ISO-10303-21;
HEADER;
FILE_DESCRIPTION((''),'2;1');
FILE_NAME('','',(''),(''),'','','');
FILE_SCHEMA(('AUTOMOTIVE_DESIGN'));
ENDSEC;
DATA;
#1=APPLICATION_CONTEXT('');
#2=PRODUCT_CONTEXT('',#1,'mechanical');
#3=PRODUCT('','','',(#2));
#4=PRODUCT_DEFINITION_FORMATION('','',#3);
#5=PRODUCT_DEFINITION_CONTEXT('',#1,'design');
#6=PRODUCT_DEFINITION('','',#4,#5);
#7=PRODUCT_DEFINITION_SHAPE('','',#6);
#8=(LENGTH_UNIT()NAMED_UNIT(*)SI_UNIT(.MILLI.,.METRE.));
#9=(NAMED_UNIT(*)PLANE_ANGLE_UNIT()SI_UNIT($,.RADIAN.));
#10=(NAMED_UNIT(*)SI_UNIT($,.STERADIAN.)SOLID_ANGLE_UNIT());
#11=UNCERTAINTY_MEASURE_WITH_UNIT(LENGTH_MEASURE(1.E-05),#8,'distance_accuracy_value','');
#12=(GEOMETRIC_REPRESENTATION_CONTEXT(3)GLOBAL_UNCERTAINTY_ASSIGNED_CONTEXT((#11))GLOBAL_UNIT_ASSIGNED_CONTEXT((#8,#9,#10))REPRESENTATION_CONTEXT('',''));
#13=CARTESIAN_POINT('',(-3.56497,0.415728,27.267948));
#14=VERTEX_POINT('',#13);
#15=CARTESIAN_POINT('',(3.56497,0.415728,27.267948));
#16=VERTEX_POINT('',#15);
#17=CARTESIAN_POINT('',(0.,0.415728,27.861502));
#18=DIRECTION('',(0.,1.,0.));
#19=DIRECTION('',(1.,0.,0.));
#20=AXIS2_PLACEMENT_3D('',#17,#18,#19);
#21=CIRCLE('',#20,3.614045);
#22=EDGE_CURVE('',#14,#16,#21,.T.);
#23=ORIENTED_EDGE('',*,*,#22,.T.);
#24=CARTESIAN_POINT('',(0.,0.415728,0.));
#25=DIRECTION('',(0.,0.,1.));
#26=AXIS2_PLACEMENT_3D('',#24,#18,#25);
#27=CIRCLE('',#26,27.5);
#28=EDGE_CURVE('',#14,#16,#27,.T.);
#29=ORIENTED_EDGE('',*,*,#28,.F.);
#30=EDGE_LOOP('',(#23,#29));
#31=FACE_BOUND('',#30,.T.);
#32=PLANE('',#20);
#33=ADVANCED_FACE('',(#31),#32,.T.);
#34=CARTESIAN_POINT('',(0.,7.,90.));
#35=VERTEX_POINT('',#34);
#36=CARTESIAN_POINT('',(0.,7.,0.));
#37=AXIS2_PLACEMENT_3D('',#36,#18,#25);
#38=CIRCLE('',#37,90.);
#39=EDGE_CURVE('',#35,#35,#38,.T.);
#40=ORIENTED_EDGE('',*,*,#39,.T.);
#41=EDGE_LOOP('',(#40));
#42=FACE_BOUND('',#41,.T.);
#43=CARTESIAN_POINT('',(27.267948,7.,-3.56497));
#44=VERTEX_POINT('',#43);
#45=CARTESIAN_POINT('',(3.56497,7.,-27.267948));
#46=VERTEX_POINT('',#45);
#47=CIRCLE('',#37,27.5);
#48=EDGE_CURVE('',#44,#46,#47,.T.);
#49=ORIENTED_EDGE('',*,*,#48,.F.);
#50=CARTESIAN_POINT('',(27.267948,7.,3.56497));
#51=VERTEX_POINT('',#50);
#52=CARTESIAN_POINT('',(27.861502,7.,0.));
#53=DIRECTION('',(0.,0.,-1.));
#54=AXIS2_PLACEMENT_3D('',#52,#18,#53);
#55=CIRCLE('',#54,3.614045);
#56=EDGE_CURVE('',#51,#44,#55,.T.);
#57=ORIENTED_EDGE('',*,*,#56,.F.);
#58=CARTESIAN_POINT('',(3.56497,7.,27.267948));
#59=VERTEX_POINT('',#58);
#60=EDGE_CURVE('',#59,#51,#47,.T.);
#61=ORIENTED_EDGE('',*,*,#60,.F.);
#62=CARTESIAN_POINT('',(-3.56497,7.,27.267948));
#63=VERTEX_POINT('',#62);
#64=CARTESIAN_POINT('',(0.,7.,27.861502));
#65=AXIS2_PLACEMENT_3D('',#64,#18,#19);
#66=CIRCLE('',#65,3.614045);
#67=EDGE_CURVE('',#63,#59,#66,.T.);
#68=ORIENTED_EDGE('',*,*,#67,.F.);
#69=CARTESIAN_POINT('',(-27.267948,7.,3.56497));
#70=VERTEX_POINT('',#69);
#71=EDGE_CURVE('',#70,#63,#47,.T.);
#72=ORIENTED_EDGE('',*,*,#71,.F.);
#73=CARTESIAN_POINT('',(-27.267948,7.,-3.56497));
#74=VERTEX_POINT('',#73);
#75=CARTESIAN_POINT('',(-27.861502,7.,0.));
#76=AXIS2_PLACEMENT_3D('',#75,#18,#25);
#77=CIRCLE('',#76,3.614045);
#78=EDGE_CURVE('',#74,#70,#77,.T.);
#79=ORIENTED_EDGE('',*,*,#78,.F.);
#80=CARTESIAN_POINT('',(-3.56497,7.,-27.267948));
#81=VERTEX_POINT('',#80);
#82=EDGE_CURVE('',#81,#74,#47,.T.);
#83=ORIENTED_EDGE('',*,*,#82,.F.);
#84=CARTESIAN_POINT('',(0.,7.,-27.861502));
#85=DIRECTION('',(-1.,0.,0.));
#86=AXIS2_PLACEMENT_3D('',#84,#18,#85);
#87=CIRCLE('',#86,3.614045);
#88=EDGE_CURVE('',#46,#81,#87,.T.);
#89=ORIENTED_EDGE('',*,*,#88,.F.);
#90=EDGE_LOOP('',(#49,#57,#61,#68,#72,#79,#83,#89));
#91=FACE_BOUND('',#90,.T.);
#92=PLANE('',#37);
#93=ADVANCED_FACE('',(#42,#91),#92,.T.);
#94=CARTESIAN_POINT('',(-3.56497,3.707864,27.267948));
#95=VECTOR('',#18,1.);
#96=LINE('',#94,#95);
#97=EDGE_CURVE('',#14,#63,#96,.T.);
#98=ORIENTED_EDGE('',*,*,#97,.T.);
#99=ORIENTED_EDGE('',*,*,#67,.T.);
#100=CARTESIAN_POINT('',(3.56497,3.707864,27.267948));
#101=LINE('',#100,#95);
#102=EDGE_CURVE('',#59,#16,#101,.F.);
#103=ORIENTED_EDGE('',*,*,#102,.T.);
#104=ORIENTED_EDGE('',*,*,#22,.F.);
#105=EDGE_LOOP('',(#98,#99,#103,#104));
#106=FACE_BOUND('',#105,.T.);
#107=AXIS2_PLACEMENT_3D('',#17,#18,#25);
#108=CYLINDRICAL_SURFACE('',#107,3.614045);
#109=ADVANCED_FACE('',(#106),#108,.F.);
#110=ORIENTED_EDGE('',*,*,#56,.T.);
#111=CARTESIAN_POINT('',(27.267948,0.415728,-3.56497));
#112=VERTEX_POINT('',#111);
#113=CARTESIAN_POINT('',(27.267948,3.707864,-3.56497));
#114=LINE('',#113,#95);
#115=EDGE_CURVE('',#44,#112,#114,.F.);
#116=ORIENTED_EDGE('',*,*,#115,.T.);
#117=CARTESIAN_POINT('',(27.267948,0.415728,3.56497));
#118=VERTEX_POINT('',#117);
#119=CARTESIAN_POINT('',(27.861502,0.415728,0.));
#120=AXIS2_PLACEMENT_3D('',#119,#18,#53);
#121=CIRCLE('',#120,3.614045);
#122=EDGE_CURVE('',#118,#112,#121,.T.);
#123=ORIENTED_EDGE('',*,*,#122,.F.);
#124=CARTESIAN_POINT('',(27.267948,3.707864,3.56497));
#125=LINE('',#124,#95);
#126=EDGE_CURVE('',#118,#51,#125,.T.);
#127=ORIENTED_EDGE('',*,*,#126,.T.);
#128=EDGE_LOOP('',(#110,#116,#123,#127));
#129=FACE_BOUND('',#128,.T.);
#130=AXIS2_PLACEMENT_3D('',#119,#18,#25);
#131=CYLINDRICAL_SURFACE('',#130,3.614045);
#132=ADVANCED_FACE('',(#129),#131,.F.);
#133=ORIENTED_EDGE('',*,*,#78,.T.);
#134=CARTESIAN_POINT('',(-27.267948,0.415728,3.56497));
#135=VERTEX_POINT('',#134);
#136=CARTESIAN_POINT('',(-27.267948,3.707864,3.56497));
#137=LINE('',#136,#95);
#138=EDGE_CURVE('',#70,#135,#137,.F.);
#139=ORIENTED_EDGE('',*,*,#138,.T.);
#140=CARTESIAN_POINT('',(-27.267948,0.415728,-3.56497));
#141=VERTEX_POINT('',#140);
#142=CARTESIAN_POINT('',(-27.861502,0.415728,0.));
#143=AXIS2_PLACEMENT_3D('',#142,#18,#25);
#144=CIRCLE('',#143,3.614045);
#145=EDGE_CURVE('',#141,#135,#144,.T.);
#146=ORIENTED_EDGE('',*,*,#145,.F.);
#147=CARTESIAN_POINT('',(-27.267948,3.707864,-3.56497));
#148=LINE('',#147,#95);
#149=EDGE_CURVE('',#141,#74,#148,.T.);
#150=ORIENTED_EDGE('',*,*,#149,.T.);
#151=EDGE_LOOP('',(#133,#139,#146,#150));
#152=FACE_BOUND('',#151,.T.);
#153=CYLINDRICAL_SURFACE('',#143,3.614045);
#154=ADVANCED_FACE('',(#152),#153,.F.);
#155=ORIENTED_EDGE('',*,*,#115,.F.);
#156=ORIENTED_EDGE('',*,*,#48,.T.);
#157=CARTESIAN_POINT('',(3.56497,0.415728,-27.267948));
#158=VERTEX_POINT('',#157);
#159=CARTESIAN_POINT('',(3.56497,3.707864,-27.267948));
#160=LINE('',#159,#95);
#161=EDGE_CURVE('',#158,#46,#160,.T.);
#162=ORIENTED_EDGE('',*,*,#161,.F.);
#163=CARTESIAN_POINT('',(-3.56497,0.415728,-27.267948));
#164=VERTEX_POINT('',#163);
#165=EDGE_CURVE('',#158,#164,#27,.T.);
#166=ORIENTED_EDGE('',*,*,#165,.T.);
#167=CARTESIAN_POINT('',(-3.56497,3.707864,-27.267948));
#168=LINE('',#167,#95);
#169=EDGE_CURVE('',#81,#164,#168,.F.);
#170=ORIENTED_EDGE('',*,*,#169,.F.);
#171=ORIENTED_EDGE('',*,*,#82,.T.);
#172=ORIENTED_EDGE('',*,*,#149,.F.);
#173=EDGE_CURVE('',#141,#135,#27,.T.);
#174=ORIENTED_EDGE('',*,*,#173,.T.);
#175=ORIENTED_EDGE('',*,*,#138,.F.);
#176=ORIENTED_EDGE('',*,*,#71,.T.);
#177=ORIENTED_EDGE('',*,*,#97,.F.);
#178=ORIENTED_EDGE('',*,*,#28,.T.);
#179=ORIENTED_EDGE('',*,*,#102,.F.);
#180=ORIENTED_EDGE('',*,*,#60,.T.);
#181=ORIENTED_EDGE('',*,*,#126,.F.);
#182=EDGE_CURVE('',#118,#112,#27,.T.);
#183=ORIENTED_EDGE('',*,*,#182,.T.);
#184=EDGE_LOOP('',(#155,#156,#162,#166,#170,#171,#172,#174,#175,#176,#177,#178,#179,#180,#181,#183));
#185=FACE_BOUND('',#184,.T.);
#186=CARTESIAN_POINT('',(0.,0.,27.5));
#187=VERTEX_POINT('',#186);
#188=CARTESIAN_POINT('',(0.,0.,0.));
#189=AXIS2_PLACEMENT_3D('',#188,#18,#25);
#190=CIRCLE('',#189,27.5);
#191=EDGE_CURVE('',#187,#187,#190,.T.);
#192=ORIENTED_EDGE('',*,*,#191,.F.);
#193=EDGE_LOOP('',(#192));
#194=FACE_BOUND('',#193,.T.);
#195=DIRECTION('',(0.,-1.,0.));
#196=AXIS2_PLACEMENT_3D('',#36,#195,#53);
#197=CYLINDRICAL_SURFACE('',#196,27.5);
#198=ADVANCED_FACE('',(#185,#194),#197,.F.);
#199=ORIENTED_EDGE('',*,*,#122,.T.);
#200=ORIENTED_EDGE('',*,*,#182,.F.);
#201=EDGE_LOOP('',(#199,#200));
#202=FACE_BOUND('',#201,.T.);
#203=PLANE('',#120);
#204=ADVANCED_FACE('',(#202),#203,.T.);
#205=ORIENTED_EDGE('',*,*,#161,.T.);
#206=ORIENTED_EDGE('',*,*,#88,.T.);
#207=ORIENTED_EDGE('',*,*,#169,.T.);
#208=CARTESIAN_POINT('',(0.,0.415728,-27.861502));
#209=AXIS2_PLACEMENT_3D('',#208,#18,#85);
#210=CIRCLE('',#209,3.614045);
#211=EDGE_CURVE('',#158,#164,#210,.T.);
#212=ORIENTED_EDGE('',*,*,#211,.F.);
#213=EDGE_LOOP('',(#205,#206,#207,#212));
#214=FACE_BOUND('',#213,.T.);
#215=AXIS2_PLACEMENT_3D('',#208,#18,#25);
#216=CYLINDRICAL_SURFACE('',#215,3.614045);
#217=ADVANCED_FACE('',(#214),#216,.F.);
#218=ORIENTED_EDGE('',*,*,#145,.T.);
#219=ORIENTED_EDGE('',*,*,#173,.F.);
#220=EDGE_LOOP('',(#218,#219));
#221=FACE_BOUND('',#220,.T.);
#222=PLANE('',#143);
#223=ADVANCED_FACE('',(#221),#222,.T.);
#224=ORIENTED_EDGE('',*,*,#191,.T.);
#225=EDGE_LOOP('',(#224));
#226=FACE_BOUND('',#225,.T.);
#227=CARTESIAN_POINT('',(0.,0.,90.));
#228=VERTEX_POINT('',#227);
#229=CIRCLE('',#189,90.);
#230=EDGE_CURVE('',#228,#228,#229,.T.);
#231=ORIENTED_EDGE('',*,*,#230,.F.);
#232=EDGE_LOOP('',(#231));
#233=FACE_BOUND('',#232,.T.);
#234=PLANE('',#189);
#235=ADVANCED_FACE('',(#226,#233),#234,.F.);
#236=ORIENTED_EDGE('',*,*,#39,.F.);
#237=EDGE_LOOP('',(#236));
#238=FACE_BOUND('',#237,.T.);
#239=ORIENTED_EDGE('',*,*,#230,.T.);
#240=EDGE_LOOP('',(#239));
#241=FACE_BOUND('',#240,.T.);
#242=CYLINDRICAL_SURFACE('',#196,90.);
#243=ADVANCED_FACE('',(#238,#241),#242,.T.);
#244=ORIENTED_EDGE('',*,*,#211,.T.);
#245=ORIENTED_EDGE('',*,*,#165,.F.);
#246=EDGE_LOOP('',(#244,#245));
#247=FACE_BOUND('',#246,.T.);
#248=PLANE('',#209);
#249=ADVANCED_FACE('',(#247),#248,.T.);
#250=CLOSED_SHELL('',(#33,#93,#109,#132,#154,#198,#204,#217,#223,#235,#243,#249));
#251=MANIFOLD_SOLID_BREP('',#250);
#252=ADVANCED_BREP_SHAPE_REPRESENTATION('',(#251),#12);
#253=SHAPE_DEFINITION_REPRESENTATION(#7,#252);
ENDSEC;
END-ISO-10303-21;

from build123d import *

# Parameters (mm, degrees)
SKETCH1_R           = 90
BOSS_EXTRUDE1_DEPTH = 7
SKETCH2_R           = 27.5
CUT_EXTRUDE1_DEPTH  = 128.471565457
SKETCH3_R           = 3.614044814
CUT_EXTRUDE2_DEPTH  = 6.584272471
CIRPATTERN1_COUNT   = 4


with BuildPart() as part:
    # Sketch1 → Boss-Extrude1 (new body)
    with BuildSketch(Plane(origin=(0, 0, 0), x_dir=(1, 0, 0), z_dir=(0, 1, 0))):
        Circle(SKETCH1_R)
    extrude(amount=BOSS_EXTRUDE1_DEPTH)

    # Sketch2 → Cut-Extrude1 (cut, through all)
    with BuildSketch(Plane(origin=(0, 0, 0), x_dir=(1, 0, 0), z_dir=(0, 1, 0))):
        Circle(SKETCH2_R)
    extrude(amount=CUT_EXTRUDE1_DEPTH, mode=Mode.SUBTRACT)

    # Sketch3 → Cut-Extrude2 (cut)
    with BuildSketch(Plane(origin=(0, 7, 0), x_dir=(1, 0, 0), z_dir=(0, 1, 0))):
        with Locations((-27.861501837, 0)):
            Circle(SKETCH3_R)
    cut_extrude2 = extrude(amount=-CUT_EXTRUDE2_DEPTH, mode=Mode.SUBTRACT)

    # CirPattern1: Cut-Extrude2 ×4 about axis
    cirpattern1_axis = Axis((0, 0, 0), (0, 1, 0))
    for i in range(1, CIRPATTERN1_COUNT):
        add(cut_extrude2.rotate(cirpattern1_axis, i * 360 / CIRPATTERN1_COUNT), mode=Mode.SUBTRACT)


solid = part.part
